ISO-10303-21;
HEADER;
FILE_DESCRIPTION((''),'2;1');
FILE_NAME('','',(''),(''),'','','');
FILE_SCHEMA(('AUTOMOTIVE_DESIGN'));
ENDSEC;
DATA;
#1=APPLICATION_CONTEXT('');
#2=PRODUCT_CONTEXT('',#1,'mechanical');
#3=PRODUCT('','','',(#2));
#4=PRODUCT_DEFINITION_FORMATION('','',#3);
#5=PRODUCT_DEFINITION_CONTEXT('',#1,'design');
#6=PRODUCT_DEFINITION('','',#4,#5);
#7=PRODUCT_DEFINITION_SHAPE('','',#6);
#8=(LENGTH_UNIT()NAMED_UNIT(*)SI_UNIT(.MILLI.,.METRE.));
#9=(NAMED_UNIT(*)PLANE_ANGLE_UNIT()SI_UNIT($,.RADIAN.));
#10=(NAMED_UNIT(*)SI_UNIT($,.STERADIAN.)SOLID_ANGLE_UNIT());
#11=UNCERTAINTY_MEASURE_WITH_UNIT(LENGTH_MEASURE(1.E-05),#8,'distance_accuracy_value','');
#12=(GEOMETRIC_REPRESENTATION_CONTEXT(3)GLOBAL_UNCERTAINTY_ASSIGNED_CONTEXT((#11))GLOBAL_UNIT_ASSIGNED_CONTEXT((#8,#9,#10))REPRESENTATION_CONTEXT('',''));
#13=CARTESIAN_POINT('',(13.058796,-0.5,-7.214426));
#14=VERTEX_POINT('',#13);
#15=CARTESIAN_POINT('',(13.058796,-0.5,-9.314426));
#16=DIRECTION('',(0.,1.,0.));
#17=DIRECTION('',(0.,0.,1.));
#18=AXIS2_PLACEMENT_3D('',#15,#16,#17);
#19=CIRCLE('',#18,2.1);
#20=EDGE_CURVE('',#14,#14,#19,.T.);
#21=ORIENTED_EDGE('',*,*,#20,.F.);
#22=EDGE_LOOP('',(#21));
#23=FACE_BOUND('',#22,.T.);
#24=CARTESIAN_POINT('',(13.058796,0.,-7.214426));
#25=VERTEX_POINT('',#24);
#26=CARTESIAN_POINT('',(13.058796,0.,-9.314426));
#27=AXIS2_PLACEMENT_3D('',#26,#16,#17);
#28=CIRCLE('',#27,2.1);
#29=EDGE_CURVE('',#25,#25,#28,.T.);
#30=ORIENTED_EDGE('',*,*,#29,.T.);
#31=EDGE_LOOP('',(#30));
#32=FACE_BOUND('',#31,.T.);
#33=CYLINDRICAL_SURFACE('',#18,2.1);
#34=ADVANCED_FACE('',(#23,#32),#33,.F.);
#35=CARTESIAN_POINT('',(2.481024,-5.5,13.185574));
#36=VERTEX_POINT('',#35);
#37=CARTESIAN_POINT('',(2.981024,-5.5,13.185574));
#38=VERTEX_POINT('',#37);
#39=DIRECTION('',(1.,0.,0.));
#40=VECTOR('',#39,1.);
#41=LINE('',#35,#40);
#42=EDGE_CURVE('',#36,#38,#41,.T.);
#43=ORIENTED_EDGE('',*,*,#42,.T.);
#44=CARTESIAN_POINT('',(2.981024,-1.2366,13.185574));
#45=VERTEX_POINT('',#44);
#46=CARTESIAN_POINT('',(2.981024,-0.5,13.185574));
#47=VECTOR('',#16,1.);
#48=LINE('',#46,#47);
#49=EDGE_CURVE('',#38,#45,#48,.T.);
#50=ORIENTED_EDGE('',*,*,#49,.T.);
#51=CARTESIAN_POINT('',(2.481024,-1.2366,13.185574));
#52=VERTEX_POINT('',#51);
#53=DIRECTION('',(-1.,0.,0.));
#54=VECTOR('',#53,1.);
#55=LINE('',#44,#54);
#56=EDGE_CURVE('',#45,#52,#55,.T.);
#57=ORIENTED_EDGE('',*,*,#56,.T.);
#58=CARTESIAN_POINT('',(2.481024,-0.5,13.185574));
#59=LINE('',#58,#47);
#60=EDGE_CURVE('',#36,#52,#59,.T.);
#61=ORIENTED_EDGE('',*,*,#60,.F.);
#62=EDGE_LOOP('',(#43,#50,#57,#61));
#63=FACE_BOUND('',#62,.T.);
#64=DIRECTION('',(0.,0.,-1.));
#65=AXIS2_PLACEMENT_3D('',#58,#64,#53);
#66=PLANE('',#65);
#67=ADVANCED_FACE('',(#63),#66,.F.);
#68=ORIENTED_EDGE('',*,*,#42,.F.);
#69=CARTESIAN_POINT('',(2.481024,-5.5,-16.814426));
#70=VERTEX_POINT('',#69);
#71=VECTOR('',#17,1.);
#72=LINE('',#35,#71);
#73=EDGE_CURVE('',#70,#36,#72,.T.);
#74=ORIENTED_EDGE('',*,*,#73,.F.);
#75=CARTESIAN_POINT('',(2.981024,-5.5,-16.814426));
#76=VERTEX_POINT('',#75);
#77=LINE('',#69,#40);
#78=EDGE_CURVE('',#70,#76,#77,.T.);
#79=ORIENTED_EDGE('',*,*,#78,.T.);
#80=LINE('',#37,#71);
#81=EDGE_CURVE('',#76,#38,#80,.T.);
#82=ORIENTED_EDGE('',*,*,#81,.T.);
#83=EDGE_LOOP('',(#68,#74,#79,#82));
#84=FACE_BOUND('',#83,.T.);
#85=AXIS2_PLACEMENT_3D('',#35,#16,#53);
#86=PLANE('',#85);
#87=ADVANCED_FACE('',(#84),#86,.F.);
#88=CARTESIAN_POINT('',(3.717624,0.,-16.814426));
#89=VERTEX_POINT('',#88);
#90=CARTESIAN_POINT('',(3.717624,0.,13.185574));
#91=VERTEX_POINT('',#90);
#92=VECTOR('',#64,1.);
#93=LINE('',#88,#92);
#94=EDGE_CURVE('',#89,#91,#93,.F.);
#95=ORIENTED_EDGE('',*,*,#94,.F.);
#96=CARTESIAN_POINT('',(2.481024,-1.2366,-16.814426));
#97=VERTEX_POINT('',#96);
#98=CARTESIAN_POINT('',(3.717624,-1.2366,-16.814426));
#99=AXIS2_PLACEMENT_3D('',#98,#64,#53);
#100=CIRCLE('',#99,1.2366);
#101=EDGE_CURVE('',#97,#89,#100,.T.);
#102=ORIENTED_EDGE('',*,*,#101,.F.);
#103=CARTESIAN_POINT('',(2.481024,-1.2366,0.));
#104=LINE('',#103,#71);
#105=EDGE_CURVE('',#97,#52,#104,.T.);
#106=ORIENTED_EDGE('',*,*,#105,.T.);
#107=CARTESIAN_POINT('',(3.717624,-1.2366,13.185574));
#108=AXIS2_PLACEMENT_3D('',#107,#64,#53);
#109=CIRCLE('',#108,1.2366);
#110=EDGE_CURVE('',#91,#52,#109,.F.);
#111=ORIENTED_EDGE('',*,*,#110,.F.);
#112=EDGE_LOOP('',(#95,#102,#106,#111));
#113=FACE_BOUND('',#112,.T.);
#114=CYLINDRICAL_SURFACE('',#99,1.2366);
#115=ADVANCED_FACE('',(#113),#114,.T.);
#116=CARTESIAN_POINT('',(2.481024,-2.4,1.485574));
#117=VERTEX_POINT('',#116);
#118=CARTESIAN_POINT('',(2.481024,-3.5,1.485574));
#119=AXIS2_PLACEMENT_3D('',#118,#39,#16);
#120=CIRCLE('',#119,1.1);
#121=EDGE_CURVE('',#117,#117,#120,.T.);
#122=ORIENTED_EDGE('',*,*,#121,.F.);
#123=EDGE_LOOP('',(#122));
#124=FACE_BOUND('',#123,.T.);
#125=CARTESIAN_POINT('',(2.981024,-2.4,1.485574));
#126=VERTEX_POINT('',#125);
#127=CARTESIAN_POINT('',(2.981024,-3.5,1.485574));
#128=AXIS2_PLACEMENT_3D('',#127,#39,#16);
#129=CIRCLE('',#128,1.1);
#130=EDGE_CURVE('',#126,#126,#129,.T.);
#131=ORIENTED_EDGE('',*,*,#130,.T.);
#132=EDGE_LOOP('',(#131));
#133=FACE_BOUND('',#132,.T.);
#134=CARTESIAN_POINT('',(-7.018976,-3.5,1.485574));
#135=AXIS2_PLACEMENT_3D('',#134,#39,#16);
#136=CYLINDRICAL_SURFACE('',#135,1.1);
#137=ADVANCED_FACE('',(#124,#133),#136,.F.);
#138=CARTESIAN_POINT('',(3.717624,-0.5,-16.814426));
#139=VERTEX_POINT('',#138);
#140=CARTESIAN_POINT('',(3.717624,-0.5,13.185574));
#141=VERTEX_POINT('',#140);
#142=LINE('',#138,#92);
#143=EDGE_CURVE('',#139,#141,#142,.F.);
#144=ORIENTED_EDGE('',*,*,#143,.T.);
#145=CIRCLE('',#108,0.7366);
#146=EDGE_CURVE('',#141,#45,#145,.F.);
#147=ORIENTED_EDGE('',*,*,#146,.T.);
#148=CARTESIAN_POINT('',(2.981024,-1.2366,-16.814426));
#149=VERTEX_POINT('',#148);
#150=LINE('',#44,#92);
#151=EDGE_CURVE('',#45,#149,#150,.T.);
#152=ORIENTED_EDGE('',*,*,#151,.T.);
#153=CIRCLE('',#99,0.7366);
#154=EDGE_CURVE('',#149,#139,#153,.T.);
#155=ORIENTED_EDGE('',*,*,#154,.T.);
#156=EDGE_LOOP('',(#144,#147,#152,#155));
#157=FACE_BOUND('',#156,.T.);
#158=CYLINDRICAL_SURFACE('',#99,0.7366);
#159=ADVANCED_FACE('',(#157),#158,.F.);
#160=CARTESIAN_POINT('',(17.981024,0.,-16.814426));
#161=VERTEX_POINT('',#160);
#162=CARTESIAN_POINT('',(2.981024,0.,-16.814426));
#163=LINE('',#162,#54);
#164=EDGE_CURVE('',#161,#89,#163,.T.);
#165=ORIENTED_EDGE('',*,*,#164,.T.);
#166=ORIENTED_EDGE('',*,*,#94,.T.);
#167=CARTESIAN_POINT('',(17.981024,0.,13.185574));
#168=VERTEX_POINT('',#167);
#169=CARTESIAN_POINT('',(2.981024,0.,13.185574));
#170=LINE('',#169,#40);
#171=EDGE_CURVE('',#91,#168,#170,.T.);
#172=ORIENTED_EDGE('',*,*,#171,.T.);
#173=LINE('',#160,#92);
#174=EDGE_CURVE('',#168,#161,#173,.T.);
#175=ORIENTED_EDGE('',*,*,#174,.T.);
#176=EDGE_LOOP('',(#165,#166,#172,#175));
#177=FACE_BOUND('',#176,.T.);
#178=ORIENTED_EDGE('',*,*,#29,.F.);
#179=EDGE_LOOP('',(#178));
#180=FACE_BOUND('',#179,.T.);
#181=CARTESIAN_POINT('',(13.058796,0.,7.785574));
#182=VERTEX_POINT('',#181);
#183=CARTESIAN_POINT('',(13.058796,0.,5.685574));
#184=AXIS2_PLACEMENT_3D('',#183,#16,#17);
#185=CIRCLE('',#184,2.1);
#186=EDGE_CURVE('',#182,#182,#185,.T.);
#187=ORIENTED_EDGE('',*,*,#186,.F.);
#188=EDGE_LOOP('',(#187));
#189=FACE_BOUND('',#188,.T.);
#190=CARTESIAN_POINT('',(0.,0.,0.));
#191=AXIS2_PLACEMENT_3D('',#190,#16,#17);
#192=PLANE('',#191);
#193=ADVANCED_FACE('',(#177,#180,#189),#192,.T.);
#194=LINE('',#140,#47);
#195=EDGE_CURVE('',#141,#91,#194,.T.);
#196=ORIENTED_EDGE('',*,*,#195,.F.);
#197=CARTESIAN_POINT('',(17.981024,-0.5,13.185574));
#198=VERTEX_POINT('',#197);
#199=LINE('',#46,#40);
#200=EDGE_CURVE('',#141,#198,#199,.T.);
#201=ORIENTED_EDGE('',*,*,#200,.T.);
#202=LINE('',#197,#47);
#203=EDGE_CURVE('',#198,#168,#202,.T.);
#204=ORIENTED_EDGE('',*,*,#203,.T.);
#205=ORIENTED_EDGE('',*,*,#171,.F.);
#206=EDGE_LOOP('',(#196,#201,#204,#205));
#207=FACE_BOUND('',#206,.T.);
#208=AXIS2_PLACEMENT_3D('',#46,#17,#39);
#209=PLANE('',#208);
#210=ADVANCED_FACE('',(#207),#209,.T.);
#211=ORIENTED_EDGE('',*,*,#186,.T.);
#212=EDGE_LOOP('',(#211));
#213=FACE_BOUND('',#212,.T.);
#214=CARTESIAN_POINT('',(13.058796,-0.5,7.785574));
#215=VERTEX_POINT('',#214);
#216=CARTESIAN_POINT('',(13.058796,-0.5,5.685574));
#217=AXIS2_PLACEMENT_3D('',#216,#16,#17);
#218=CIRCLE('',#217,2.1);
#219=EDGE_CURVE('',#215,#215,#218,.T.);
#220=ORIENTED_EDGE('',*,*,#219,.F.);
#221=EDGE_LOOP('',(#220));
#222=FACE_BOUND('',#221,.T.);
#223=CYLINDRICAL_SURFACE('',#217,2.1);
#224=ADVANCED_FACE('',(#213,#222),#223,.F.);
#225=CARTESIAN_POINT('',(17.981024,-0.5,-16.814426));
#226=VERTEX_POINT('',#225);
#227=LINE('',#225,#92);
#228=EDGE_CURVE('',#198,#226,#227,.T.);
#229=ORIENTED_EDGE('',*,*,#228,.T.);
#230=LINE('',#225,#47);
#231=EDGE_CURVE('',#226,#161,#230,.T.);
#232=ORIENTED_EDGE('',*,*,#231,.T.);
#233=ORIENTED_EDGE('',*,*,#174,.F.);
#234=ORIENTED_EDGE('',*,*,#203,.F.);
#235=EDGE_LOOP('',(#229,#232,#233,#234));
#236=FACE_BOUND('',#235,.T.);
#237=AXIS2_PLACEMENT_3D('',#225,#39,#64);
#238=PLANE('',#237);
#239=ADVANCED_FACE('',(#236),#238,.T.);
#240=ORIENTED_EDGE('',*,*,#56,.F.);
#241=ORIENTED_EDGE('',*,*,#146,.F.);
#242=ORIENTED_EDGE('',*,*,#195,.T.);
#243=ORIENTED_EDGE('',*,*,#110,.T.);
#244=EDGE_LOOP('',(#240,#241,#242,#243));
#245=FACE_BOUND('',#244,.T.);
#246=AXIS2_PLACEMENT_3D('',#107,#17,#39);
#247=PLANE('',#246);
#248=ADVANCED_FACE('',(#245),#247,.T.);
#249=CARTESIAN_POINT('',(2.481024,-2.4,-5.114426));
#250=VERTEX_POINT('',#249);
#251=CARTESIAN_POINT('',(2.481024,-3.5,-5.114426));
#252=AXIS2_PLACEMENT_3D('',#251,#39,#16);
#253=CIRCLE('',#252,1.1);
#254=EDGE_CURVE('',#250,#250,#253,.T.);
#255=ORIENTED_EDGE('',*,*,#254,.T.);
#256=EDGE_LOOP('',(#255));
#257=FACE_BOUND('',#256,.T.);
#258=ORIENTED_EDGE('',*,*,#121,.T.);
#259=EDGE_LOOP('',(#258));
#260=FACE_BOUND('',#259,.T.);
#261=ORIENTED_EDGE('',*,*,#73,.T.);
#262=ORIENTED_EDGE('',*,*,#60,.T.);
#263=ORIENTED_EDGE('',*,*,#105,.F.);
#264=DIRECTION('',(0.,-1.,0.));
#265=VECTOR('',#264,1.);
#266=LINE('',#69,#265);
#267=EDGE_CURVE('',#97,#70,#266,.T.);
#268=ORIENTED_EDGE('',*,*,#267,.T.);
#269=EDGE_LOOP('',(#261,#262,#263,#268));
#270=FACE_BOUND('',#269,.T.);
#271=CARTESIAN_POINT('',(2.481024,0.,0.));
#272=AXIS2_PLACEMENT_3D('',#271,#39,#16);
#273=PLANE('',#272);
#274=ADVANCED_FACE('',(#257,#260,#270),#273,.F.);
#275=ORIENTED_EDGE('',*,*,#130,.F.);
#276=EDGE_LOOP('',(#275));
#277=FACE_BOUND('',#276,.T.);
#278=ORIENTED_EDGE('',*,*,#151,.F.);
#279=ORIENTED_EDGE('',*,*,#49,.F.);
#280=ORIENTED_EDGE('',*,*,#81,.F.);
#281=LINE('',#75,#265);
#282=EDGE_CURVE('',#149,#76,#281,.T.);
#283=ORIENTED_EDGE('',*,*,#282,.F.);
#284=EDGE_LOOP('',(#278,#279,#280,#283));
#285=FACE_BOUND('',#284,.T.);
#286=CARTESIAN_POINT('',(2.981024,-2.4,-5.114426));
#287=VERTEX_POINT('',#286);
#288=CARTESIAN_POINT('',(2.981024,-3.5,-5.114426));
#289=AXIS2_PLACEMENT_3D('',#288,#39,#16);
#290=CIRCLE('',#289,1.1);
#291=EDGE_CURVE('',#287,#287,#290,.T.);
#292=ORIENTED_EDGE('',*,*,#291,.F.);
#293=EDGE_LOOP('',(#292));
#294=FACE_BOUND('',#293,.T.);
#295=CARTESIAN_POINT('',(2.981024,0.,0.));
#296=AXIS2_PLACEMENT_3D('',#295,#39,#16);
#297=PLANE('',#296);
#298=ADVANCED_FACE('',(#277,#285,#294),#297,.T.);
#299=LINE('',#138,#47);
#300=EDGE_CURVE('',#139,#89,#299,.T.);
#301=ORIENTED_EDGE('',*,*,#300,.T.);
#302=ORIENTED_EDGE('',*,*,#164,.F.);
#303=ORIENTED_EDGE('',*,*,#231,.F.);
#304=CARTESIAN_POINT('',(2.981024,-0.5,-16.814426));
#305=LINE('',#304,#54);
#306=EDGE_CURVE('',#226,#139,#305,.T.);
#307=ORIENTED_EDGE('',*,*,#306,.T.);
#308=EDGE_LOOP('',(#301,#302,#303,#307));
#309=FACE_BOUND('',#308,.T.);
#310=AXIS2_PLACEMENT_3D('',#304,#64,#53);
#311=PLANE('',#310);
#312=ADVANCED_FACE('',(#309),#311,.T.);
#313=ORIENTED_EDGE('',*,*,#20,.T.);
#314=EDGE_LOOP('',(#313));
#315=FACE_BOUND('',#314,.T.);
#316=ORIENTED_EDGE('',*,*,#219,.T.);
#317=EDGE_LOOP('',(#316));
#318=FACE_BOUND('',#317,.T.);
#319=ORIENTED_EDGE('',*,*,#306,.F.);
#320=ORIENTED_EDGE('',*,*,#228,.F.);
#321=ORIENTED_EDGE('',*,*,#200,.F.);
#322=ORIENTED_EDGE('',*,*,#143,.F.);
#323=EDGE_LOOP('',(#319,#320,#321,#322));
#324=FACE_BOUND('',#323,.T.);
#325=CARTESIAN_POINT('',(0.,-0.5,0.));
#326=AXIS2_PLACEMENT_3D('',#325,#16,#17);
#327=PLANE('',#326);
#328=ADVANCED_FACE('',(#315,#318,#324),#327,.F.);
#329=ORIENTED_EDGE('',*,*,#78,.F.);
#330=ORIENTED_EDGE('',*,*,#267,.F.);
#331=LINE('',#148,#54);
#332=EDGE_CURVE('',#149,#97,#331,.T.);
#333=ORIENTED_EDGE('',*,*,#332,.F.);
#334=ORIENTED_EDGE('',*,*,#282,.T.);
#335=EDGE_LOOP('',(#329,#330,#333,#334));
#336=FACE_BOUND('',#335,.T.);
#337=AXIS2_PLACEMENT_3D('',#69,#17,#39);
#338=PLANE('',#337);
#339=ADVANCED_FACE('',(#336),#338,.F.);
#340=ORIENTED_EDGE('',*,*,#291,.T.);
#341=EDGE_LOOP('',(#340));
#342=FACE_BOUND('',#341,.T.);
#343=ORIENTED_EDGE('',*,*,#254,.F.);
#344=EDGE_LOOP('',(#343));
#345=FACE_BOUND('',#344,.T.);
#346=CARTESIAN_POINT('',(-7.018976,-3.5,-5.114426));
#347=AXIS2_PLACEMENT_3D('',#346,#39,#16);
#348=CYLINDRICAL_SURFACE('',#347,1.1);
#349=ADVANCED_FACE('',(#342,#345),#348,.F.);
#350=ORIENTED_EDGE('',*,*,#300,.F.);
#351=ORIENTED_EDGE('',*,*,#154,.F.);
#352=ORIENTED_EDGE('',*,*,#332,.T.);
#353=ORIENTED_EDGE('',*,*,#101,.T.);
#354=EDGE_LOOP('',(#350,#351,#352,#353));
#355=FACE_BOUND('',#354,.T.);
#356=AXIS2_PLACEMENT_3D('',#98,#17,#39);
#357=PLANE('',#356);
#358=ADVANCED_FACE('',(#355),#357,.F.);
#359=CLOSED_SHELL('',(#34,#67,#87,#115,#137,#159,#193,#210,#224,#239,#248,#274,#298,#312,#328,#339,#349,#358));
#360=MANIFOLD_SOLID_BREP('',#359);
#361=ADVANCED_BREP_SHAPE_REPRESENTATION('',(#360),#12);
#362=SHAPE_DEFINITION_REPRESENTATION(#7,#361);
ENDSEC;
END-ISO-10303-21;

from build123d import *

# Parameters (mm, degrees)
SKETCH1_W                    = 15
SKETCH1_H                    = 30
SKETCH1_R                    = 2.1
BASE_FLANGE1_DEPTH           = 0.5
EDGE_FLANGE1_STRIP_W         = 3.4732
EDGE_FLANGE1_STRIP_H         = 0.5
EDGE_FLANGE1_STRIP_CUT_DEPTH = 30
EDGE_FLANGE1_DEPTH           = 30
SKETCH8_R                    = 1.1
CUT_EXTRUDE1_DEPTH           = 10


# Sheet-metal steps are written as plain solids
with BuildPart() as part:
    # Sketch1 → Base-Flange1 (new body)
    with BuildSketch(Plane(origin=(0, 0, 0), x_dir=(1, 0, 0), z_dir=(0, 1, 0))):
        with Locations((10.481024164, 1.814426404)):
            Rectangle(SKETCH1_W, SKETCH1_H)
        with Locations(Location((13.058795971, -5.685573596, 0), (0, 0, 270))):
            Circle(SKETCH1_R, mode=Mode.SUBTRACT)
        with Locations(Location((13.058795971, 9.314426404, 0), (0, 0, 270))):
            Circle(SKETCH1_R, mode=Mode.SUBTRACT)
    extrude(amount=-BASE_FLANGE1_DEPTH)

    # Edge-Flange1 strip (across the edge) → Edge-Flange1 strip cut (cut)
    with BuildSketch(Plane(origin=(2.981024164, -0.5, 13.185573596), x_dir=(1, 0, 0), z_dir=(0, 0, -1))):
        with Locations((-1, -0.25)):
            Rectangle(EDGE_FLANGE1_STRIP_W, EDGE_FLANGE1_STRIP_H)
    extrude(amount=EDGE_FLANGE1_STRIP_CUT_DEPTH, mode=Mode.SUBTRACT)

    # Edge-Flange1 section (across the edge) → Edge-Flange1 (add)
    with BuildSketch(Plane(origin=(2.981024164, -0.5, 13.185573596), x_dir=(1, 0, 0), z_dir=(0, 0, -1))):
        with BuildLine():
            Line((-0.5, 0.7366), (-0.5, 5))
            Line((-0.5, 5), (0, 5))
            Line((0, 5), (0, 0.7366))
            ThreePointArc((0, 0.7366), (0.215745145, 0.215745145), (0.7366, 0))
            Line((0.7366, 0), (0.7366, -0.5))
            ThreePointArc((0.7366, -0.5), (-0.137808246, -0.137808246), (-0.5, 0.7366))
        make_face()
    extrude(amount=EDGE_FLANGE1_DEPTH)

    # Sketch8 → Cut-Extrude1 (cut)
    with BuildSketch(Plane(origin=(2.981024164, 0, 0), x_dir=(0, 0, -1), z_dir=(1, 0, 0))):
        with Locations(Location((5.114426404, -3.5, 0), (0, 0, 90))):
            Circle(SKETCH8_R)
        with Locations(Location((-1.485573596, -3.5, 0), (0, 0, 90))):
            Circle(SKETCH8_R)
    extrude(amount=-CUT_EXTRUDE1_DEPTH, mode=Mode.SUBTRACT)


solid = part.part
